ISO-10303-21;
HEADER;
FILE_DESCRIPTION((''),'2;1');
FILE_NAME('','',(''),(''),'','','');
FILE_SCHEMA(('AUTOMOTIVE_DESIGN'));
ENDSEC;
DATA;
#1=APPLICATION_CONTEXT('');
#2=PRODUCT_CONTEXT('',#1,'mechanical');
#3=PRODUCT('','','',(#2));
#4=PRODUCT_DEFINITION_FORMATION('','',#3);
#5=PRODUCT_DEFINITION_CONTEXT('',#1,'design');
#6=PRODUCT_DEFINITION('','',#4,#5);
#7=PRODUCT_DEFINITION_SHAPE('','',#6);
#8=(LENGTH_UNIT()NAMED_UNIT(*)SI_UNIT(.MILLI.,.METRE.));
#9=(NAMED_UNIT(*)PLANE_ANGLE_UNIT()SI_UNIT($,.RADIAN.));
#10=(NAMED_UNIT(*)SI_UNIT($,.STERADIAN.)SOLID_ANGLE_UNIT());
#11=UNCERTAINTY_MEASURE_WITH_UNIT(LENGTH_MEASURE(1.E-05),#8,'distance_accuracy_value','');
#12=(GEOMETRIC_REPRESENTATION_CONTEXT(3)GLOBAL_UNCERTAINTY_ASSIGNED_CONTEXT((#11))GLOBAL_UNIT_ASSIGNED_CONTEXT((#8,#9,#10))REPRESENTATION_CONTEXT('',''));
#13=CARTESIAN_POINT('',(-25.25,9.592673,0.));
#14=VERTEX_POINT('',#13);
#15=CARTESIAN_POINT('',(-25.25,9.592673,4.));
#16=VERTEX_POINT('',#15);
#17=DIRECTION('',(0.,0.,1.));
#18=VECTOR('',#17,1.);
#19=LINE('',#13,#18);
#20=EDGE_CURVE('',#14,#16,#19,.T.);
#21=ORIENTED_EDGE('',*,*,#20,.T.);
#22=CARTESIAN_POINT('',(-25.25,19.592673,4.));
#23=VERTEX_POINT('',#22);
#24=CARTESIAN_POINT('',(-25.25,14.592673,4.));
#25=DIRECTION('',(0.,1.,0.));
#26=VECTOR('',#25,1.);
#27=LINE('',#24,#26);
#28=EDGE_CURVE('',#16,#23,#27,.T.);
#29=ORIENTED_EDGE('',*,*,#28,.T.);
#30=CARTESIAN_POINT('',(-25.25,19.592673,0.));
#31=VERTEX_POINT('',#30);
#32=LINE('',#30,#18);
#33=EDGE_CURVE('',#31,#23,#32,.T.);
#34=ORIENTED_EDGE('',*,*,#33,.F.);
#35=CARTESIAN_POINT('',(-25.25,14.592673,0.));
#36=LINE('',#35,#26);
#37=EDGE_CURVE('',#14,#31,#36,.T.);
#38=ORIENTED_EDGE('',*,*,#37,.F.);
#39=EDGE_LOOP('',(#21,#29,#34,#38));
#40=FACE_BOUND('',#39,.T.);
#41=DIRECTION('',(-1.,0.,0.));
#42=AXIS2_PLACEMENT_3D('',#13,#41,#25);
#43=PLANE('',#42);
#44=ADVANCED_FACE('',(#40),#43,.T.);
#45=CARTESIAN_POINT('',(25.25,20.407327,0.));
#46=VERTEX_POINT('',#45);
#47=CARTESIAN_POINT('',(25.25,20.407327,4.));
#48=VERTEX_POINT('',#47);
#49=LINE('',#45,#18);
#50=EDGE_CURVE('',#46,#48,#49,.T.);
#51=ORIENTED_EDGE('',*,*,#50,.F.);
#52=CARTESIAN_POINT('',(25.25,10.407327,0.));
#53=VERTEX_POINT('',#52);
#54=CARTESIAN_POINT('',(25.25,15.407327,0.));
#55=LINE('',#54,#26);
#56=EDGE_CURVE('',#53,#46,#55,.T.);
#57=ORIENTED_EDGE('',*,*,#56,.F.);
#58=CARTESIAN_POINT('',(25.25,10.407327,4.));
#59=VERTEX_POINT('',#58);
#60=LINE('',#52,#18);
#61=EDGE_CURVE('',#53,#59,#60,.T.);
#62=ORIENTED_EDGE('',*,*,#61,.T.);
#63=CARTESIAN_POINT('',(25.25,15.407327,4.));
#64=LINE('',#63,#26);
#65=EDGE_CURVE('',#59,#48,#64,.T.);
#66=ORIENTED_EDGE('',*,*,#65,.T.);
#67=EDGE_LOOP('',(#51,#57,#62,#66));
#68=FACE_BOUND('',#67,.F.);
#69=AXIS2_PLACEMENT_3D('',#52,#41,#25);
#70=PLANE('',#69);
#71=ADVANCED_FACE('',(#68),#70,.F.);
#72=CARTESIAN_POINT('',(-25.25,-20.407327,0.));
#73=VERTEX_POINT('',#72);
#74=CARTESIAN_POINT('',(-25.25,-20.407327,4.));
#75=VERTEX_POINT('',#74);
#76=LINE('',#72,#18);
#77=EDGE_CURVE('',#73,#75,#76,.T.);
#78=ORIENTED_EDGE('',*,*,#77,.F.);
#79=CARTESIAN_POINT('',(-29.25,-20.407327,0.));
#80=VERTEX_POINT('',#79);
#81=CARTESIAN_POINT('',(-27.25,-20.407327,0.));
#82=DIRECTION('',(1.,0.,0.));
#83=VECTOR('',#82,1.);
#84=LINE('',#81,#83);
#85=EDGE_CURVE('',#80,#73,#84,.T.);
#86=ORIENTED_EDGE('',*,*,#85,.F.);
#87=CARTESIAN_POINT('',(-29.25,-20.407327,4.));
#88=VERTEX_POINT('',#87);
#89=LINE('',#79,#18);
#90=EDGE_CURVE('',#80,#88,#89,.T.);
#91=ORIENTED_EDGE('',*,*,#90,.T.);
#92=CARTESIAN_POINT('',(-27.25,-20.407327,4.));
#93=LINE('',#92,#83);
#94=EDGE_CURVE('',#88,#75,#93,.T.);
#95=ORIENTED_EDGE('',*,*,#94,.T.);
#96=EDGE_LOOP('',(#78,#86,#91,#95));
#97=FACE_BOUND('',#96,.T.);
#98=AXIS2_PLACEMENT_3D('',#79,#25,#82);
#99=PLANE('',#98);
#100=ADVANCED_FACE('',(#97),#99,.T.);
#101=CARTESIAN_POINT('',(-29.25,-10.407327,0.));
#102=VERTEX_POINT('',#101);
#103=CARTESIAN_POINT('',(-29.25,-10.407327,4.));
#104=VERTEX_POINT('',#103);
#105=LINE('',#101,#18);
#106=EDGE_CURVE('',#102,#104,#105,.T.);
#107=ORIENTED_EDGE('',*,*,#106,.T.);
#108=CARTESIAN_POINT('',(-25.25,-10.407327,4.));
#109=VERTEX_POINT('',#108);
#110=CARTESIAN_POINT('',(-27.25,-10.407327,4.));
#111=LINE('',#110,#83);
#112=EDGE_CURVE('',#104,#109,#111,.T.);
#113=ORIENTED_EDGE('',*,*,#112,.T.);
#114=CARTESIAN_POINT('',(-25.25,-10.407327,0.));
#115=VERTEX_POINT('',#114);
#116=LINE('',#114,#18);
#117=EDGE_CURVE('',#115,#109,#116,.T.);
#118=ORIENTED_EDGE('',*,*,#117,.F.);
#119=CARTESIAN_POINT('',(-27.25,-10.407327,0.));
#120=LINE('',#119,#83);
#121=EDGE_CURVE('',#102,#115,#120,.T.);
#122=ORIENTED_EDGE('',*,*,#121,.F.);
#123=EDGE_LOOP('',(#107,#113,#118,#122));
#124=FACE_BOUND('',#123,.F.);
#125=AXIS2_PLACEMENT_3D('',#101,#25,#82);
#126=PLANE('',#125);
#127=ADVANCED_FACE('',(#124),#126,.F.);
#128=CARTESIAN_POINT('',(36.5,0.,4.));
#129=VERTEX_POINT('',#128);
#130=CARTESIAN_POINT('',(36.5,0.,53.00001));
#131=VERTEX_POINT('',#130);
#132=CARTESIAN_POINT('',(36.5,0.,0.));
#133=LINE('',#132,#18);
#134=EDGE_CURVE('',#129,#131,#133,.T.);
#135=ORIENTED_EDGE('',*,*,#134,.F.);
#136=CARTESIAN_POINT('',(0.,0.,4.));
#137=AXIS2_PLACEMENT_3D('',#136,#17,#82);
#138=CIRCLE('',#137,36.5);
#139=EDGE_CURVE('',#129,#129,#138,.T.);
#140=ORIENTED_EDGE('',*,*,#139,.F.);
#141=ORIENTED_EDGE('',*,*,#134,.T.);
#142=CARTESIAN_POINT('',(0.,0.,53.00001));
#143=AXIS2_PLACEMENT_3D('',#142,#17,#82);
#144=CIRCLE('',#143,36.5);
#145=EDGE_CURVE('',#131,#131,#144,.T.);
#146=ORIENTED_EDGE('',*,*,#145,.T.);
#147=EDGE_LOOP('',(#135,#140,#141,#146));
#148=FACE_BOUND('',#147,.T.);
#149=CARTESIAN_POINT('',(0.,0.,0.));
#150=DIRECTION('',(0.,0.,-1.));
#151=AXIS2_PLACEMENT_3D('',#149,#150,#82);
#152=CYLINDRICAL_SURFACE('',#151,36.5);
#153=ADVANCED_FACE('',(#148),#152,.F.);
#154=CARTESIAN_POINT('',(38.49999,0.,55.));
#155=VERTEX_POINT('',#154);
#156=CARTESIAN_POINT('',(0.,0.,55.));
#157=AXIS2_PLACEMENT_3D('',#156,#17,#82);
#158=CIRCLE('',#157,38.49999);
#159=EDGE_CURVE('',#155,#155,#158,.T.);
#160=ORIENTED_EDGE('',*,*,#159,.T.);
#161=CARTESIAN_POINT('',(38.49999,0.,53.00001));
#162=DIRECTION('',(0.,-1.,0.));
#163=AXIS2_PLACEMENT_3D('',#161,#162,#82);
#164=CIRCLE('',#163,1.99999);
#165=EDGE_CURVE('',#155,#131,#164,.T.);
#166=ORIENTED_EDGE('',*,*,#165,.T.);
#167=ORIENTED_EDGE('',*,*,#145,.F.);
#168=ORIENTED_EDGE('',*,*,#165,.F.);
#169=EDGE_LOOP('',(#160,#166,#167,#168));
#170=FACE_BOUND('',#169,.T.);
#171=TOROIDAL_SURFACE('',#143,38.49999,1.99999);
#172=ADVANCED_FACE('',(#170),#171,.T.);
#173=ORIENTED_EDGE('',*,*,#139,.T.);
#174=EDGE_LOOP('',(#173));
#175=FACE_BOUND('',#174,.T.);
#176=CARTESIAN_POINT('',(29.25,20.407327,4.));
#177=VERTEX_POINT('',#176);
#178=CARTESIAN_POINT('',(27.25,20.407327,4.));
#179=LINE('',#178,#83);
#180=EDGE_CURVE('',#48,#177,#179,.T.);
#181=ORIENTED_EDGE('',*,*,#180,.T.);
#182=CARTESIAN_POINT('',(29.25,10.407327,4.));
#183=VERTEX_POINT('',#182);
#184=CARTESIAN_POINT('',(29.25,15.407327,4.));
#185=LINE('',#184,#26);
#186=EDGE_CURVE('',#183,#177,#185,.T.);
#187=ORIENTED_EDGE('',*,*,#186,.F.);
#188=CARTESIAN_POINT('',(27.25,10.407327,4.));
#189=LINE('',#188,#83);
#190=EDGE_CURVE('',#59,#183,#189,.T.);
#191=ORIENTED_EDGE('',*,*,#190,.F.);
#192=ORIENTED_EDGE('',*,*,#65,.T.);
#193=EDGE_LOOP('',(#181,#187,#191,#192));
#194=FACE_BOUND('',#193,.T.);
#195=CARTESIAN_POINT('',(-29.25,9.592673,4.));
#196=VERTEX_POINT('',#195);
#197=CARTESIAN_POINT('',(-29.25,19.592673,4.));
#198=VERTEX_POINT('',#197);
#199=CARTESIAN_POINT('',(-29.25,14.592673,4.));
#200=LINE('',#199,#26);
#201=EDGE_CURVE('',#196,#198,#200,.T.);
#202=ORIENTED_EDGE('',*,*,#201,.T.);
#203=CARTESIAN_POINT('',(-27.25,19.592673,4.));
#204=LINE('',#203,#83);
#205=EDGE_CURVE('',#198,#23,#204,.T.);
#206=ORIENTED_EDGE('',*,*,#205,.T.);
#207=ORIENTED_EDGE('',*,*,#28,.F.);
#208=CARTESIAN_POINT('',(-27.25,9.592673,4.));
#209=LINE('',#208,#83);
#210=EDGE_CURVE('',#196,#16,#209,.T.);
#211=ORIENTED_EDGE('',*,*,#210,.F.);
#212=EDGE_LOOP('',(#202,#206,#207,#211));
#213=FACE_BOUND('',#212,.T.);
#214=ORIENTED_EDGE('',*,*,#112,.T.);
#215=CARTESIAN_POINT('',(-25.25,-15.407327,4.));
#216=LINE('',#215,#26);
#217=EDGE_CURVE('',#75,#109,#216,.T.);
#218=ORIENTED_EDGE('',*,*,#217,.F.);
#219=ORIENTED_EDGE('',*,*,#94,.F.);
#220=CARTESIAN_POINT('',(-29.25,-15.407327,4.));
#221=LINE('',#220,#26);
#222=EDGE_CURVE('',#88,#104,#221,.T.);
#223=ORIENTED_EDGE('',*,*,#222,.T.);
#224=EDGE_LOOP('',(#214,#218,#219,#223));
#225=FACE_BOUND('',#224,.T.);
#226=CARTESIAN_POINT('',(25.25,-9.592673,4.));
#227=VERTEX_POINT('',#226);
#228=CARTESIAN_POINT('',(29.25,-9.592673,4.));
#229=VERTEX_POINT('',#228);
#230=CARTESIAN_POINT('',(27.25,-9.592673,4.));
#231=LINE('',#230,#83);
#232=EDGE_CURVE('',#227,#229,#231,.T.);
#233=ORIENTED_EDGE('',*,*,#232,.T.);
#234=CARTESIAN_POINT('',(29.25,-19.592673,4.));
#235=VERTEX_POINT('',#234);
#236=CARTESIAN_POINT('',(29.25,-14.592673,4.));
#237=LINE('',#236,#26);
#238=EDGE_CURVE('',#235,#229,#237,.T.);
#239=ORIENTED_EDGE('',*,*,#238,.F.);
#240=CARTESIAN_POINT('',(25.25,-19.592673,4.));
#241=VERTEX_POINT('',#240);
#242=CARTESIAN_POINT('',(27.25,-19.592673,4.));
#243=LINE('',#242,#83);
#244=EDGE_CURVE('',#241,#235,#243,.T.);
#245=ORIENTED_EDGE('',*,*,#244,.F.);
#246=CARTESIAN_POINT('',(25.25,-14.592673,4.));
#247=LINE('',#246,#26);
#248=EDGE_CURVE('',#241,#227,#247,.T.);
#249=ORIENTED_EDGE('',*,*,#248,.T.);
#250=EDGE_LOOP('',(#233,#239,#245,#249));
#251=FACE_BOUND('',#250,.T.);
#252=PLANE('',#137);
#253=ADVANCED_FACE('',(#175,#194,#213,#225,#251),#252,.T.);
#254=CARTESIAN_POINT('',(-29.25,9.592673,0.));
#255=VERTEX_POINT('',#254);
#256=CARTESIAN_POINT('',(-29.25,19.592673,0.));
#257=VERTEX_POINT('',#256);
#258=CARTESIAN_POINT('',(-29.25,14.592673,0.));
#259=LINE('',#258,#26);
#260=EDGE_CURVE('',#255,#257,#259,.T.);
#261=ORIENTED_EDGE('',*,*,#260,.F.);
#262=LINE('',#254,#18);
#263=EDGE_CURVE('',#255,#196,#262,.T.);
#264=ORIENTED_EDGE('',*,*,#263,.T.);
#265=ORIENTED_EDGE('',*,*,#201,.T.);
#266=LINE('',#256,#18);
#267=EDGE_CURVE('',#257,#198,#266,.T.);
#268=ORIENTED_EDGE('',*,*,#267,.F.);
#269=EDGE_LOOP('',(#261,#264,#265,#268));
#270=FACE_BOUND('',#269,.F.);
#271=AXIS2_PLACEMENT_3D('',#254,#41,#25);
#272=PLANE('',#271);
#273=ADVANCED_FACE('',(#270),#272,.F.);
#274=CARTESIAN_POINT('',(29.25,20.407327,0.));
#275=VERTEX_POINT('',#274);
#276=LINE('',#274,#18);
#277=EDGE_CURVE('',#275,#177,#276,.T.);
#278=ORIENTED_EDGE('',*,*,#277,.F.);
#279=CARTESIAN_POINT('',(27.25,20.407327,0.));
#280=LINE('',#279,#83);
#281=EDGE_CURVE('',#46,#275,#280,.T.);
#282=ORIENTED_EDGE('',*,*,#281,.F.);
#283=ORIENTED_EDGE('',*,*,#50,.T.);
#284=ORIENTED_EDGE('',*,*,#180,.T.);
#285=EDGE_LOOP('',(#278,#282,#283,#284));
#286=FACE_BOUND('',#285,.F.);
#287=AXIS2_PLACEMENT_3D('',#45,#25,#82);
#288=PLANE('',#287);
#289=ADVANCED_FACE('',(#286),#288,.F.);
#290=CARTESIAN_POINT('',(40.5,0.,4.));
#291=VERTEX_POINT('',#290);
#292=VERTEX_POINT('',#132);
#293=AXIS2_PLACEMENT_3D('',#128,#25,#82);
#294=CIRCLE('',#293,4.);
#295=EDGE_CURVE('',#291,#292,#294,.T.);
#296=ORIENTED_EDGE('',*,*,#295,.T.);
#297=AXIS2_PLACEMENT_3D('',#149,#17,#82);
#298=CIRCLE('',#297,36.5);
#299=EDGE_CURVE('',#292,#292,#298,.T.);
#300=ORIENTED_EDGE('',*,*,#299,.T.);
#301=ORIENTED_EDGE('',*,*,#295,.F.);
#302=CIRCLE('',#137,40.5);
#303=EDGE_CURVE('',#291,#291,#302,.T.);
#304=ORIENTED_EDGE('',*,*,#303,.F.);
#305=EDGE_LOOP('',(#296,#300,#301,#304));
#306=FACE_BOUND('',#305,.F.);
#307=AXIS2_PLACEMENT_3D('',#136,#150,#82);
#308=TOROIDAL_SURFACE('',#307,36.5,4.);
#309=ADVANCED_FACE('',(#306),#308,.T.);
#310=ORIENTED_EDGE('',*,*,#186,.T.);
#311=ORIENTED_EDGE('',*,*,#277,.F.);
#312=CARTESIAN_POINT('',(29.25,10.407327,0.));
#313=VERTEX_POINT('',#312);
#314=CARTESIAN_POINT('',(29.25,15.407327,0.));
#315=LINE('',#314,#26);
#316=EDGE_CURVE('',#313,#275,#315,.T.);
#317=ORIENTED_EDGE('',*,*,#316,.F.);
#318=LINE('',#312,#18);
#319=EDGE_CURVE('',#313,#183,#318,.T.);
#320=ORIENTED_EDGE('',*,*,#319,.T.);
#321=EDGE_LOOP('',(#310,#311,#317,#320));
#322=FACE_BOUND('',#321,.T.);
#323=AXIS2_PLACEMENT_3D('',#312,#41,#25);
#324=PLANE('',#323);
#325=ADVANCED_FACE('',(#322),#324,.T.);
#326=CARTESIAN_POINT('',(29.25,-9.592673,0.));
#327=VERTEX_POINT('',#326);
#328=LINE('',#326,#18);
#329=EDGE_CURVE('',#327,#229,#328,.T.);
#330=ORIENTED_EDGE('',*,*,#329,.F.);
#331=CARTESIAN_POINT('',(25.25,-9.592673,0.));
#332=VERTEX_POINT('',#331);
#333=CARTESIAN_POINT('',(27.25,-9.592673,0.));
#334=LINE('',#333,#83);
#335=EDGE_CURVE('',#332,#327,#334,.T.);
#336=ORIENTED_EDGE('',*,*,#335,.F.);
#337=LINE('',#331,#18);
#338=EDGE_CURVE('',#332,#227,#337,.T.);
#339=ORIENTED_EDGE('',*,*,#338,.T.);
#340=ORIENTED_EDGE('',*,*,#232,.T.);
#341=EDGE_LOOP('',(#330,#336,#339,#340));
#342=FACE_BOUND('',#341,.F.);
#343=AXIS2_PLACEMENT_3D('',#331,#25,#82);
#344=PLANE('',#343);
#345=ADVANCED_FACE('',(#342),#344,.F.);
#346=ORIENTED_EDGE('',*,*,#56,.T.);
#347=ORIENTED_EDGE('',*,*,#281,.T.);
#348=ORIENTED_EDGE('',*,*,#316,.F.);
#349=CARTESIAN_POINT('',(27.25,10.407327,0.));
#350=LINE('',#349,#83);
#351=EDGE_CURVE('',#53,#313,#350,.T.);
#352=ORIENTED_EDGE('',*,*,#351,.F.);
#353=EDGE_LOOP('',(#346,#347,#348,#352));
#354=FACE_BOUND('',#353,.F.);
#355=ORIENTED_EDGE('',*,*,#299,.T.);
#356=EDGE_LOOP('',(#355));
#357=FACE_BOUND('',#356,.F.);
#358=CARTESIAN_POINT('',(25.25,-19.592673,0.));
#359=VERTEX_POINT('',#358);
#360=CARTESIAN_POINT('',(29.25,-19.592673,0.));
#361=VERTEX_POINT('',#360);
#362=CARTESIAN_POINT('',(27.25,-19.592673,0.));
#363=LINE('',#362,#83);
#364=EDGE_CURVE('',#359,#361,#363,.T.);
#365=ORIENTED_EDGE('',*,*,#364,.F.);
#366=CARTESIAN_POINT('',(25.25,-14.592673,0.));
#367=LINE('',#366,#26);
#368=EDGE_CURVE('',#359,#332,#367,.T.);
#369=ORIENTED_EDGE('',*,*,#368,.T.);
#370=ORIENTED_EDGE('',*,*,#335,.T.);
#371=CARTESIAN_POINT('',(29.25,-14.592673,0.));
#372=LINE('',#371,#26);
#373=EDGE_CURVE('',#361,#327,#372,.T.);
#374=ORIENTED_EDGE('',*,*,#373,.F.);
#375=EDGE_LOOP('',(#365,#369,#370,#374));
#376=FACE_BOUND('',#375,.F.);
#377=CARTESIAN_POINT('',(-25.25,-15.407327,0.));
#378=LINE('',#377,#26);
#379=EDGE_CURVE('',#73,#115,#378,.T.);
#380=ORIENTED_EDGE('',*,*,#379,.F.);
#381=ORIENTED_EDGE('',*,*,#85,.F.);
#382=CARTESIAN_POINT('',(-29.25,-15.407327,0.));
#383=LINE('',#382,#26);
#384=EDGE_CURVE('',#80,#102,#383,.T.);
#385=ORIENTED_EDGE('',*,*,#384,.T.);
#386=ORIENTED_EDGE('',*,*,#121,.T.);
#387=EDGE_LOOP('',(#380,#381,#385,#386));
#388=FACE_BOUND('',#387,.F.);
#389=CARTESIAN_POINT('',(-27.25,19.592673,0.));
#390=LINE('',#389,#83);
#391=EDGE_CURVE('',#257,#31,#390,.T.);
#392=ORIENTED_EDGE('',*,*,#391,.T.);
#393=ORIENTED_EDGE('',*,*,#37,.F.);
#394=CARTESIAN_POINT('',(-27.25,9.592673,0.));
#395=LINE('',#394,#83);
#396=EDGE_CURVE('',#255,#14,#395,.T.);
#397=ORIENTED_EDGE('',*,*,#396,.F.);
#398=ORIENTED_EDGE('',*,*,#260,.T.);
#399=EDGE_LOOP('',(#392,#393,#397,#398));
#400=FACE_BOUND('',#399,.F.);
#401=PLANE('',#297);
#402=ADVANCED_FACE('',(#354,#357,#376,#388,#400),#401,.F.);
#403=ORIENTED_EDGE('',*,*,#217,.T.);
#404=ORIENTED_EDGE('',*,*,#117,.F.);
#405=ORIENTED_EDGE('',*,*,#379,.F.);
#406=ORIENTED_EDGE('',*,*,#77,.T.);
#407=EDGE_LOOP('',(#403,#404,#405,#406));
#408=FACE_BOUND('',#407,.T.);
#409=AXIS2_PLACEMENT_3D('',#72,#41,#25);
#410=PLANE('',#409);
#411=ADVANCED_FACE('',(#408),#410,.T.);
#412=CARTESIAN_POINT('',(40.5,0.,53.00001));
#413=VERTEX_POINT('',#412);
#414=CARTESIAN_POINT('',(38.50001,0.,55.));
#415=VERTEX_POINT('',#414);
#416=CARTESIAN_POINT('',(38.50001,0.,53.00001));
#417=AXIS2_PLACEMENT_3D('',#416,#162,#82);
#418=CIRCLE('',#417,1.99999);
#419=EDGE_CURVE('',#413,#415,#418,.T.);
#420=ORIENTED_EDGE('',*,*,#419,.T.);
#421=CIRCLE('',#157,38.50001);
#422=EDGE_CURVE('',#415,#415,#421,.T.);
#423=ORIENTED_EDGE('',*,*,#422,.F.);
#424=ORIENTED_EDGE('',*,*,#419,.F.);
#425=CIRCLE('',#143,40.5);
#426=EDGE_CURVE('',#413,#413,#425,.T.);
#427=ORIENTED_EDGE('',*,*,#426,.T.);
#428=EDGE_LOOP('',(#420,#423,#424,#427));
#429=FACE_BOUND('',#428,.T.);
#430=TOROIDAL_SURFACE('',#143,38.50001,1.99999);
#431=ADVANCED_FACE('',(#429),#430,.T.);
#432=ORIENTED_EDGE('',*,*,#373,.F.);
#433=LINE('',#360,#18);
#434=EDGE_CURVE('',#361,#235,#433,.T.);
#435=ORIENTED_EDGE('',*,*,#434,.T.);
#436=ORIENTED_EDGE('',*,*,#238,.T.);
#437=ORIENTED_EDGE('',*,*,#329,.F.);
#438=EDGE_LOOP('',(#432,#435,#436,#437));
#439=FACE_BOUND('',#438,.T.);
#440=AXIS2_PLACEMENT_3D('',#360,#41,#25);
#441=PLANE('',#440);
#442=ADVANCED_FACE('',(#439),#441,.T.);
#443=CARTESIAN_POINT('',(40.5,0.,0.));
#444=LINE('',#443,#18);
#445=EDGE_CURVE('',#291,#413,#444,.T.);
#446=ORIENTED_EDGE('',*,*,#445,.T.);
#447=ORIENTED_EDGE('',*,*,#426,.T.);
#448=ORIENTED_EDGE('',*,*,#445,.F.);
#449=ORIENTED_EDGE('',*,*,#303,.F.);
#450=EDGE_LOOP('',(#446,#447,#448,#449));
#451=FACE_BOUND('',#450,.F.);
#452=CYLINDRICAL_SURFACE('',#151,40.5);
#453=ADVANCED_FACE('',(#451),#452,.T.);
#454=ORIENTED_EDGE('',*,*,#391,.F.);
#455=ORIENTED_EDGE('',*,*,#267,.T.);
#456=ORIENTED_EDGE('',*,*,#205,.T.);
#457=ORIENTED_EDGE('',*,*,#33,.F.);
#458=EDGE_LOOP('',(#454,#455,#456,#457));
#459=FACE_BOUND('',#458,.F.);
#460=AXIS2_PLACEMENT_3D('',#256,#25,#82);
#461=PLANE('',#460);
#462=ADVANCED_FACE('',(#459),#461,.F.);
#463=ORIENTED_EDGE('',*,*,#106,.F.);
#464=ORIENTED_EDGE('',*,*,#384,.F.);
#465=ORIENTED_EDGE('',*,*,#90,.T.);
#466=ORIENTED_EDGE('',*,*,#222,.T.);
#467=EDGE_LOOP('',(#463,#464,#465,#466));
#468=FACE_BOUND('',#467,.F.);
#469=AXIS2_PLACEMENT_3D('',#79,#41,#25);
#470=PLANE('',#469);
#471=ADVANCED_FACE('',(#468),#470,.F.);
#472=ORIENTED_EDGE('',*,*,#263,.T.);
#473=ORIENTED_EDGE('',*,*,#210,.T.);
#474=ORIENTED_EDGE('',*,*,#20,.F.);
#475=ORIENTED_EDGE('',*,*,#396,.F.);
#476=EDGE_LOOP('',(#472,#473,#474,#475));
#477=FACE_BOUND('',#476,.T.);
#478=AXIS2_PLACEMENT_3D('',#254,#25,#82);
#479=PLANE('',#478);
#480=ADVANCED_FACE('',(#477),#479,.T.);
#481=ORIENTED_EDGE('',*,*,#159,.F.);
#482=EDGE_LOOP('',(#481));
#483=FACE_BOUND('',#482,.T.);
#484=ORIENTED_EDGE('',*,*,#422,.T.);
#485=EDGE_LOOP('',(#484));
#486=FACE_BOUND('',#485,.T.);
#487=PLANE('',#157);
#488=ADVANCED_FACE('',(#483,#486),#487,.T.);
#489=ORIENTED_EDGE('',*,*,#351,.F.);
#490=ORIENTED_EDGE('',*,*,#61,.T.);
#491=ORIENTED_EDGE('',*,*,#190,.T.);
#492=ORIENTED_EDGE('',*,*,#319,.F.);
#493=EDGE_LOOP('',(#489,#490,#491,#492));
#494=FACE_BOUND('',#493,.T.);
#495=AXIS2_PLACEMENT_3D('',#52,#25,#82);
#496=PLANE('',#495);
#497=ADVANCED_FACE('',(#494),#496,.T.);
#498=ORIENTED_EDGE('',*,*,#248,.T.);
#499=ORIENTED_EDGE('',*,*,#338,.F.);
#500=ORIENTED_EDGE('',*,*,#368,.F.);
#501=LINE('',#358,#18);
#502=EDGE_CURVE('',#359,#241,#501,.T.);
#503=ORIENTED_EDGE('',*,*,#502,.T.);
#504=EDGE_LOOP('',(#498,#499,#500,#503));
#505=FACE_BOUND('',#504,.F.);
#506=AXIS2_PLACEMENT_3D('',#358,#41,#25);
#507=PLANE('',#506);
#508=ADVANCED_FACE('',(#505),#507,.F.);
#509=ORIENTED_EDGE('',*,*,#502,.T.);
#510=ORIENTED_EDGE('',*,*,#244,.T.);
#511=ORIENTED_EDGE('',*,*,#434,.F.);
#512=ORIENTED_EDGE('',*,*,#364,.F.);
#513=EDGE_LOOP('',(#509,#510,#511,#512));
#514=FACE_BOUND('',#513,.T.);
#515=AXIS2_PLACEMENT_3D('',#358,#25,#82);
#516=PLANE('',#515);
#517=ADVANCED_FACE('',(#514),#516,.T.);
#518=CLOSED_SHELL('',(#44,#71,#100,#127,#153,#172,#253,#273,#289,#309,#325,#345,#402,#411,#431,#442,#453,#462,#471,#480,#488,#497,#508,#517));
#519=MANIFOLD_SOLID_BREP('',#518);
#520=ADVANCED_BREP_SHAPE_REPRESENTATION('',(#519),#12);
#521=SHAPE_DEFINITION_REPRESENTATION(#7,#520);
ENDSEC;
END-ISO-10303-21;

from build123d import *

# Parameters (mm, degrees)
F0_R     = 36.5
F0_W     = 4
F0_H     = 10
F1_DEPTH = 4
F0_R_2   = 40.5
F2_DEPTH = 55
F3_R     = 1.99999
F4_R     = 4


# Not quite as in the source:
# - a fillet or chamfer is up to 0.001 mm smaller than in the source, because OpenCascade refuses the exact size


with BuildPart() as f1:
    # F0 (on Top) → F1 (new body)
    with BuildSketch(Plane.XY):
        Circle(F0_R)
        with Locations((-27.25, -15.4073267064)):
            Rectangle(F0_W, F0_H, mode=Mode.SUBTRACT)
        with Locations((27.25, -14.5926732936)):
            Rectangle(F0_W, F0_H, mode=Mode.SUBTRACT)
        with Locations((-27.25, 14.5926732936)):
            Rectangle(F0_W, F0_H, mode=Mode.SUBTRACT)
        with Locations((27.25, 15.4073267064)):
            Rectangle(F0_W, F0_H, mode=Mode.SUBTRACT)
    extrude(amount=F1_DEPTH)

    # F0 (on Top) → F2 (join)
    with BuildSketch(Plane.XY):
        Circle(F0_R_2)
        Circle(F0_R, mode=Mode.SUBTRACT)
    extrude(amount=F2_DEPTH)

    # F3 (radius 2 in the source; OpenCascade refuses exactly that, so slightly less here)
    f3_edges = [f1.edges().sort_by_distance(p)[0] for p in [
        (-40.5, 0, 55),
        (-36.5, 0, 55),
    ]]
    fillet(f3_edges, radius=F3_R)

    # F4
    f4_edges = [f1.edges().sort_by_distance(p)[0] for p in [
        (-40.5, 0, 0),
    ]]
    fillet(f4_edges, radius=F4_R)


solid = f1.part
